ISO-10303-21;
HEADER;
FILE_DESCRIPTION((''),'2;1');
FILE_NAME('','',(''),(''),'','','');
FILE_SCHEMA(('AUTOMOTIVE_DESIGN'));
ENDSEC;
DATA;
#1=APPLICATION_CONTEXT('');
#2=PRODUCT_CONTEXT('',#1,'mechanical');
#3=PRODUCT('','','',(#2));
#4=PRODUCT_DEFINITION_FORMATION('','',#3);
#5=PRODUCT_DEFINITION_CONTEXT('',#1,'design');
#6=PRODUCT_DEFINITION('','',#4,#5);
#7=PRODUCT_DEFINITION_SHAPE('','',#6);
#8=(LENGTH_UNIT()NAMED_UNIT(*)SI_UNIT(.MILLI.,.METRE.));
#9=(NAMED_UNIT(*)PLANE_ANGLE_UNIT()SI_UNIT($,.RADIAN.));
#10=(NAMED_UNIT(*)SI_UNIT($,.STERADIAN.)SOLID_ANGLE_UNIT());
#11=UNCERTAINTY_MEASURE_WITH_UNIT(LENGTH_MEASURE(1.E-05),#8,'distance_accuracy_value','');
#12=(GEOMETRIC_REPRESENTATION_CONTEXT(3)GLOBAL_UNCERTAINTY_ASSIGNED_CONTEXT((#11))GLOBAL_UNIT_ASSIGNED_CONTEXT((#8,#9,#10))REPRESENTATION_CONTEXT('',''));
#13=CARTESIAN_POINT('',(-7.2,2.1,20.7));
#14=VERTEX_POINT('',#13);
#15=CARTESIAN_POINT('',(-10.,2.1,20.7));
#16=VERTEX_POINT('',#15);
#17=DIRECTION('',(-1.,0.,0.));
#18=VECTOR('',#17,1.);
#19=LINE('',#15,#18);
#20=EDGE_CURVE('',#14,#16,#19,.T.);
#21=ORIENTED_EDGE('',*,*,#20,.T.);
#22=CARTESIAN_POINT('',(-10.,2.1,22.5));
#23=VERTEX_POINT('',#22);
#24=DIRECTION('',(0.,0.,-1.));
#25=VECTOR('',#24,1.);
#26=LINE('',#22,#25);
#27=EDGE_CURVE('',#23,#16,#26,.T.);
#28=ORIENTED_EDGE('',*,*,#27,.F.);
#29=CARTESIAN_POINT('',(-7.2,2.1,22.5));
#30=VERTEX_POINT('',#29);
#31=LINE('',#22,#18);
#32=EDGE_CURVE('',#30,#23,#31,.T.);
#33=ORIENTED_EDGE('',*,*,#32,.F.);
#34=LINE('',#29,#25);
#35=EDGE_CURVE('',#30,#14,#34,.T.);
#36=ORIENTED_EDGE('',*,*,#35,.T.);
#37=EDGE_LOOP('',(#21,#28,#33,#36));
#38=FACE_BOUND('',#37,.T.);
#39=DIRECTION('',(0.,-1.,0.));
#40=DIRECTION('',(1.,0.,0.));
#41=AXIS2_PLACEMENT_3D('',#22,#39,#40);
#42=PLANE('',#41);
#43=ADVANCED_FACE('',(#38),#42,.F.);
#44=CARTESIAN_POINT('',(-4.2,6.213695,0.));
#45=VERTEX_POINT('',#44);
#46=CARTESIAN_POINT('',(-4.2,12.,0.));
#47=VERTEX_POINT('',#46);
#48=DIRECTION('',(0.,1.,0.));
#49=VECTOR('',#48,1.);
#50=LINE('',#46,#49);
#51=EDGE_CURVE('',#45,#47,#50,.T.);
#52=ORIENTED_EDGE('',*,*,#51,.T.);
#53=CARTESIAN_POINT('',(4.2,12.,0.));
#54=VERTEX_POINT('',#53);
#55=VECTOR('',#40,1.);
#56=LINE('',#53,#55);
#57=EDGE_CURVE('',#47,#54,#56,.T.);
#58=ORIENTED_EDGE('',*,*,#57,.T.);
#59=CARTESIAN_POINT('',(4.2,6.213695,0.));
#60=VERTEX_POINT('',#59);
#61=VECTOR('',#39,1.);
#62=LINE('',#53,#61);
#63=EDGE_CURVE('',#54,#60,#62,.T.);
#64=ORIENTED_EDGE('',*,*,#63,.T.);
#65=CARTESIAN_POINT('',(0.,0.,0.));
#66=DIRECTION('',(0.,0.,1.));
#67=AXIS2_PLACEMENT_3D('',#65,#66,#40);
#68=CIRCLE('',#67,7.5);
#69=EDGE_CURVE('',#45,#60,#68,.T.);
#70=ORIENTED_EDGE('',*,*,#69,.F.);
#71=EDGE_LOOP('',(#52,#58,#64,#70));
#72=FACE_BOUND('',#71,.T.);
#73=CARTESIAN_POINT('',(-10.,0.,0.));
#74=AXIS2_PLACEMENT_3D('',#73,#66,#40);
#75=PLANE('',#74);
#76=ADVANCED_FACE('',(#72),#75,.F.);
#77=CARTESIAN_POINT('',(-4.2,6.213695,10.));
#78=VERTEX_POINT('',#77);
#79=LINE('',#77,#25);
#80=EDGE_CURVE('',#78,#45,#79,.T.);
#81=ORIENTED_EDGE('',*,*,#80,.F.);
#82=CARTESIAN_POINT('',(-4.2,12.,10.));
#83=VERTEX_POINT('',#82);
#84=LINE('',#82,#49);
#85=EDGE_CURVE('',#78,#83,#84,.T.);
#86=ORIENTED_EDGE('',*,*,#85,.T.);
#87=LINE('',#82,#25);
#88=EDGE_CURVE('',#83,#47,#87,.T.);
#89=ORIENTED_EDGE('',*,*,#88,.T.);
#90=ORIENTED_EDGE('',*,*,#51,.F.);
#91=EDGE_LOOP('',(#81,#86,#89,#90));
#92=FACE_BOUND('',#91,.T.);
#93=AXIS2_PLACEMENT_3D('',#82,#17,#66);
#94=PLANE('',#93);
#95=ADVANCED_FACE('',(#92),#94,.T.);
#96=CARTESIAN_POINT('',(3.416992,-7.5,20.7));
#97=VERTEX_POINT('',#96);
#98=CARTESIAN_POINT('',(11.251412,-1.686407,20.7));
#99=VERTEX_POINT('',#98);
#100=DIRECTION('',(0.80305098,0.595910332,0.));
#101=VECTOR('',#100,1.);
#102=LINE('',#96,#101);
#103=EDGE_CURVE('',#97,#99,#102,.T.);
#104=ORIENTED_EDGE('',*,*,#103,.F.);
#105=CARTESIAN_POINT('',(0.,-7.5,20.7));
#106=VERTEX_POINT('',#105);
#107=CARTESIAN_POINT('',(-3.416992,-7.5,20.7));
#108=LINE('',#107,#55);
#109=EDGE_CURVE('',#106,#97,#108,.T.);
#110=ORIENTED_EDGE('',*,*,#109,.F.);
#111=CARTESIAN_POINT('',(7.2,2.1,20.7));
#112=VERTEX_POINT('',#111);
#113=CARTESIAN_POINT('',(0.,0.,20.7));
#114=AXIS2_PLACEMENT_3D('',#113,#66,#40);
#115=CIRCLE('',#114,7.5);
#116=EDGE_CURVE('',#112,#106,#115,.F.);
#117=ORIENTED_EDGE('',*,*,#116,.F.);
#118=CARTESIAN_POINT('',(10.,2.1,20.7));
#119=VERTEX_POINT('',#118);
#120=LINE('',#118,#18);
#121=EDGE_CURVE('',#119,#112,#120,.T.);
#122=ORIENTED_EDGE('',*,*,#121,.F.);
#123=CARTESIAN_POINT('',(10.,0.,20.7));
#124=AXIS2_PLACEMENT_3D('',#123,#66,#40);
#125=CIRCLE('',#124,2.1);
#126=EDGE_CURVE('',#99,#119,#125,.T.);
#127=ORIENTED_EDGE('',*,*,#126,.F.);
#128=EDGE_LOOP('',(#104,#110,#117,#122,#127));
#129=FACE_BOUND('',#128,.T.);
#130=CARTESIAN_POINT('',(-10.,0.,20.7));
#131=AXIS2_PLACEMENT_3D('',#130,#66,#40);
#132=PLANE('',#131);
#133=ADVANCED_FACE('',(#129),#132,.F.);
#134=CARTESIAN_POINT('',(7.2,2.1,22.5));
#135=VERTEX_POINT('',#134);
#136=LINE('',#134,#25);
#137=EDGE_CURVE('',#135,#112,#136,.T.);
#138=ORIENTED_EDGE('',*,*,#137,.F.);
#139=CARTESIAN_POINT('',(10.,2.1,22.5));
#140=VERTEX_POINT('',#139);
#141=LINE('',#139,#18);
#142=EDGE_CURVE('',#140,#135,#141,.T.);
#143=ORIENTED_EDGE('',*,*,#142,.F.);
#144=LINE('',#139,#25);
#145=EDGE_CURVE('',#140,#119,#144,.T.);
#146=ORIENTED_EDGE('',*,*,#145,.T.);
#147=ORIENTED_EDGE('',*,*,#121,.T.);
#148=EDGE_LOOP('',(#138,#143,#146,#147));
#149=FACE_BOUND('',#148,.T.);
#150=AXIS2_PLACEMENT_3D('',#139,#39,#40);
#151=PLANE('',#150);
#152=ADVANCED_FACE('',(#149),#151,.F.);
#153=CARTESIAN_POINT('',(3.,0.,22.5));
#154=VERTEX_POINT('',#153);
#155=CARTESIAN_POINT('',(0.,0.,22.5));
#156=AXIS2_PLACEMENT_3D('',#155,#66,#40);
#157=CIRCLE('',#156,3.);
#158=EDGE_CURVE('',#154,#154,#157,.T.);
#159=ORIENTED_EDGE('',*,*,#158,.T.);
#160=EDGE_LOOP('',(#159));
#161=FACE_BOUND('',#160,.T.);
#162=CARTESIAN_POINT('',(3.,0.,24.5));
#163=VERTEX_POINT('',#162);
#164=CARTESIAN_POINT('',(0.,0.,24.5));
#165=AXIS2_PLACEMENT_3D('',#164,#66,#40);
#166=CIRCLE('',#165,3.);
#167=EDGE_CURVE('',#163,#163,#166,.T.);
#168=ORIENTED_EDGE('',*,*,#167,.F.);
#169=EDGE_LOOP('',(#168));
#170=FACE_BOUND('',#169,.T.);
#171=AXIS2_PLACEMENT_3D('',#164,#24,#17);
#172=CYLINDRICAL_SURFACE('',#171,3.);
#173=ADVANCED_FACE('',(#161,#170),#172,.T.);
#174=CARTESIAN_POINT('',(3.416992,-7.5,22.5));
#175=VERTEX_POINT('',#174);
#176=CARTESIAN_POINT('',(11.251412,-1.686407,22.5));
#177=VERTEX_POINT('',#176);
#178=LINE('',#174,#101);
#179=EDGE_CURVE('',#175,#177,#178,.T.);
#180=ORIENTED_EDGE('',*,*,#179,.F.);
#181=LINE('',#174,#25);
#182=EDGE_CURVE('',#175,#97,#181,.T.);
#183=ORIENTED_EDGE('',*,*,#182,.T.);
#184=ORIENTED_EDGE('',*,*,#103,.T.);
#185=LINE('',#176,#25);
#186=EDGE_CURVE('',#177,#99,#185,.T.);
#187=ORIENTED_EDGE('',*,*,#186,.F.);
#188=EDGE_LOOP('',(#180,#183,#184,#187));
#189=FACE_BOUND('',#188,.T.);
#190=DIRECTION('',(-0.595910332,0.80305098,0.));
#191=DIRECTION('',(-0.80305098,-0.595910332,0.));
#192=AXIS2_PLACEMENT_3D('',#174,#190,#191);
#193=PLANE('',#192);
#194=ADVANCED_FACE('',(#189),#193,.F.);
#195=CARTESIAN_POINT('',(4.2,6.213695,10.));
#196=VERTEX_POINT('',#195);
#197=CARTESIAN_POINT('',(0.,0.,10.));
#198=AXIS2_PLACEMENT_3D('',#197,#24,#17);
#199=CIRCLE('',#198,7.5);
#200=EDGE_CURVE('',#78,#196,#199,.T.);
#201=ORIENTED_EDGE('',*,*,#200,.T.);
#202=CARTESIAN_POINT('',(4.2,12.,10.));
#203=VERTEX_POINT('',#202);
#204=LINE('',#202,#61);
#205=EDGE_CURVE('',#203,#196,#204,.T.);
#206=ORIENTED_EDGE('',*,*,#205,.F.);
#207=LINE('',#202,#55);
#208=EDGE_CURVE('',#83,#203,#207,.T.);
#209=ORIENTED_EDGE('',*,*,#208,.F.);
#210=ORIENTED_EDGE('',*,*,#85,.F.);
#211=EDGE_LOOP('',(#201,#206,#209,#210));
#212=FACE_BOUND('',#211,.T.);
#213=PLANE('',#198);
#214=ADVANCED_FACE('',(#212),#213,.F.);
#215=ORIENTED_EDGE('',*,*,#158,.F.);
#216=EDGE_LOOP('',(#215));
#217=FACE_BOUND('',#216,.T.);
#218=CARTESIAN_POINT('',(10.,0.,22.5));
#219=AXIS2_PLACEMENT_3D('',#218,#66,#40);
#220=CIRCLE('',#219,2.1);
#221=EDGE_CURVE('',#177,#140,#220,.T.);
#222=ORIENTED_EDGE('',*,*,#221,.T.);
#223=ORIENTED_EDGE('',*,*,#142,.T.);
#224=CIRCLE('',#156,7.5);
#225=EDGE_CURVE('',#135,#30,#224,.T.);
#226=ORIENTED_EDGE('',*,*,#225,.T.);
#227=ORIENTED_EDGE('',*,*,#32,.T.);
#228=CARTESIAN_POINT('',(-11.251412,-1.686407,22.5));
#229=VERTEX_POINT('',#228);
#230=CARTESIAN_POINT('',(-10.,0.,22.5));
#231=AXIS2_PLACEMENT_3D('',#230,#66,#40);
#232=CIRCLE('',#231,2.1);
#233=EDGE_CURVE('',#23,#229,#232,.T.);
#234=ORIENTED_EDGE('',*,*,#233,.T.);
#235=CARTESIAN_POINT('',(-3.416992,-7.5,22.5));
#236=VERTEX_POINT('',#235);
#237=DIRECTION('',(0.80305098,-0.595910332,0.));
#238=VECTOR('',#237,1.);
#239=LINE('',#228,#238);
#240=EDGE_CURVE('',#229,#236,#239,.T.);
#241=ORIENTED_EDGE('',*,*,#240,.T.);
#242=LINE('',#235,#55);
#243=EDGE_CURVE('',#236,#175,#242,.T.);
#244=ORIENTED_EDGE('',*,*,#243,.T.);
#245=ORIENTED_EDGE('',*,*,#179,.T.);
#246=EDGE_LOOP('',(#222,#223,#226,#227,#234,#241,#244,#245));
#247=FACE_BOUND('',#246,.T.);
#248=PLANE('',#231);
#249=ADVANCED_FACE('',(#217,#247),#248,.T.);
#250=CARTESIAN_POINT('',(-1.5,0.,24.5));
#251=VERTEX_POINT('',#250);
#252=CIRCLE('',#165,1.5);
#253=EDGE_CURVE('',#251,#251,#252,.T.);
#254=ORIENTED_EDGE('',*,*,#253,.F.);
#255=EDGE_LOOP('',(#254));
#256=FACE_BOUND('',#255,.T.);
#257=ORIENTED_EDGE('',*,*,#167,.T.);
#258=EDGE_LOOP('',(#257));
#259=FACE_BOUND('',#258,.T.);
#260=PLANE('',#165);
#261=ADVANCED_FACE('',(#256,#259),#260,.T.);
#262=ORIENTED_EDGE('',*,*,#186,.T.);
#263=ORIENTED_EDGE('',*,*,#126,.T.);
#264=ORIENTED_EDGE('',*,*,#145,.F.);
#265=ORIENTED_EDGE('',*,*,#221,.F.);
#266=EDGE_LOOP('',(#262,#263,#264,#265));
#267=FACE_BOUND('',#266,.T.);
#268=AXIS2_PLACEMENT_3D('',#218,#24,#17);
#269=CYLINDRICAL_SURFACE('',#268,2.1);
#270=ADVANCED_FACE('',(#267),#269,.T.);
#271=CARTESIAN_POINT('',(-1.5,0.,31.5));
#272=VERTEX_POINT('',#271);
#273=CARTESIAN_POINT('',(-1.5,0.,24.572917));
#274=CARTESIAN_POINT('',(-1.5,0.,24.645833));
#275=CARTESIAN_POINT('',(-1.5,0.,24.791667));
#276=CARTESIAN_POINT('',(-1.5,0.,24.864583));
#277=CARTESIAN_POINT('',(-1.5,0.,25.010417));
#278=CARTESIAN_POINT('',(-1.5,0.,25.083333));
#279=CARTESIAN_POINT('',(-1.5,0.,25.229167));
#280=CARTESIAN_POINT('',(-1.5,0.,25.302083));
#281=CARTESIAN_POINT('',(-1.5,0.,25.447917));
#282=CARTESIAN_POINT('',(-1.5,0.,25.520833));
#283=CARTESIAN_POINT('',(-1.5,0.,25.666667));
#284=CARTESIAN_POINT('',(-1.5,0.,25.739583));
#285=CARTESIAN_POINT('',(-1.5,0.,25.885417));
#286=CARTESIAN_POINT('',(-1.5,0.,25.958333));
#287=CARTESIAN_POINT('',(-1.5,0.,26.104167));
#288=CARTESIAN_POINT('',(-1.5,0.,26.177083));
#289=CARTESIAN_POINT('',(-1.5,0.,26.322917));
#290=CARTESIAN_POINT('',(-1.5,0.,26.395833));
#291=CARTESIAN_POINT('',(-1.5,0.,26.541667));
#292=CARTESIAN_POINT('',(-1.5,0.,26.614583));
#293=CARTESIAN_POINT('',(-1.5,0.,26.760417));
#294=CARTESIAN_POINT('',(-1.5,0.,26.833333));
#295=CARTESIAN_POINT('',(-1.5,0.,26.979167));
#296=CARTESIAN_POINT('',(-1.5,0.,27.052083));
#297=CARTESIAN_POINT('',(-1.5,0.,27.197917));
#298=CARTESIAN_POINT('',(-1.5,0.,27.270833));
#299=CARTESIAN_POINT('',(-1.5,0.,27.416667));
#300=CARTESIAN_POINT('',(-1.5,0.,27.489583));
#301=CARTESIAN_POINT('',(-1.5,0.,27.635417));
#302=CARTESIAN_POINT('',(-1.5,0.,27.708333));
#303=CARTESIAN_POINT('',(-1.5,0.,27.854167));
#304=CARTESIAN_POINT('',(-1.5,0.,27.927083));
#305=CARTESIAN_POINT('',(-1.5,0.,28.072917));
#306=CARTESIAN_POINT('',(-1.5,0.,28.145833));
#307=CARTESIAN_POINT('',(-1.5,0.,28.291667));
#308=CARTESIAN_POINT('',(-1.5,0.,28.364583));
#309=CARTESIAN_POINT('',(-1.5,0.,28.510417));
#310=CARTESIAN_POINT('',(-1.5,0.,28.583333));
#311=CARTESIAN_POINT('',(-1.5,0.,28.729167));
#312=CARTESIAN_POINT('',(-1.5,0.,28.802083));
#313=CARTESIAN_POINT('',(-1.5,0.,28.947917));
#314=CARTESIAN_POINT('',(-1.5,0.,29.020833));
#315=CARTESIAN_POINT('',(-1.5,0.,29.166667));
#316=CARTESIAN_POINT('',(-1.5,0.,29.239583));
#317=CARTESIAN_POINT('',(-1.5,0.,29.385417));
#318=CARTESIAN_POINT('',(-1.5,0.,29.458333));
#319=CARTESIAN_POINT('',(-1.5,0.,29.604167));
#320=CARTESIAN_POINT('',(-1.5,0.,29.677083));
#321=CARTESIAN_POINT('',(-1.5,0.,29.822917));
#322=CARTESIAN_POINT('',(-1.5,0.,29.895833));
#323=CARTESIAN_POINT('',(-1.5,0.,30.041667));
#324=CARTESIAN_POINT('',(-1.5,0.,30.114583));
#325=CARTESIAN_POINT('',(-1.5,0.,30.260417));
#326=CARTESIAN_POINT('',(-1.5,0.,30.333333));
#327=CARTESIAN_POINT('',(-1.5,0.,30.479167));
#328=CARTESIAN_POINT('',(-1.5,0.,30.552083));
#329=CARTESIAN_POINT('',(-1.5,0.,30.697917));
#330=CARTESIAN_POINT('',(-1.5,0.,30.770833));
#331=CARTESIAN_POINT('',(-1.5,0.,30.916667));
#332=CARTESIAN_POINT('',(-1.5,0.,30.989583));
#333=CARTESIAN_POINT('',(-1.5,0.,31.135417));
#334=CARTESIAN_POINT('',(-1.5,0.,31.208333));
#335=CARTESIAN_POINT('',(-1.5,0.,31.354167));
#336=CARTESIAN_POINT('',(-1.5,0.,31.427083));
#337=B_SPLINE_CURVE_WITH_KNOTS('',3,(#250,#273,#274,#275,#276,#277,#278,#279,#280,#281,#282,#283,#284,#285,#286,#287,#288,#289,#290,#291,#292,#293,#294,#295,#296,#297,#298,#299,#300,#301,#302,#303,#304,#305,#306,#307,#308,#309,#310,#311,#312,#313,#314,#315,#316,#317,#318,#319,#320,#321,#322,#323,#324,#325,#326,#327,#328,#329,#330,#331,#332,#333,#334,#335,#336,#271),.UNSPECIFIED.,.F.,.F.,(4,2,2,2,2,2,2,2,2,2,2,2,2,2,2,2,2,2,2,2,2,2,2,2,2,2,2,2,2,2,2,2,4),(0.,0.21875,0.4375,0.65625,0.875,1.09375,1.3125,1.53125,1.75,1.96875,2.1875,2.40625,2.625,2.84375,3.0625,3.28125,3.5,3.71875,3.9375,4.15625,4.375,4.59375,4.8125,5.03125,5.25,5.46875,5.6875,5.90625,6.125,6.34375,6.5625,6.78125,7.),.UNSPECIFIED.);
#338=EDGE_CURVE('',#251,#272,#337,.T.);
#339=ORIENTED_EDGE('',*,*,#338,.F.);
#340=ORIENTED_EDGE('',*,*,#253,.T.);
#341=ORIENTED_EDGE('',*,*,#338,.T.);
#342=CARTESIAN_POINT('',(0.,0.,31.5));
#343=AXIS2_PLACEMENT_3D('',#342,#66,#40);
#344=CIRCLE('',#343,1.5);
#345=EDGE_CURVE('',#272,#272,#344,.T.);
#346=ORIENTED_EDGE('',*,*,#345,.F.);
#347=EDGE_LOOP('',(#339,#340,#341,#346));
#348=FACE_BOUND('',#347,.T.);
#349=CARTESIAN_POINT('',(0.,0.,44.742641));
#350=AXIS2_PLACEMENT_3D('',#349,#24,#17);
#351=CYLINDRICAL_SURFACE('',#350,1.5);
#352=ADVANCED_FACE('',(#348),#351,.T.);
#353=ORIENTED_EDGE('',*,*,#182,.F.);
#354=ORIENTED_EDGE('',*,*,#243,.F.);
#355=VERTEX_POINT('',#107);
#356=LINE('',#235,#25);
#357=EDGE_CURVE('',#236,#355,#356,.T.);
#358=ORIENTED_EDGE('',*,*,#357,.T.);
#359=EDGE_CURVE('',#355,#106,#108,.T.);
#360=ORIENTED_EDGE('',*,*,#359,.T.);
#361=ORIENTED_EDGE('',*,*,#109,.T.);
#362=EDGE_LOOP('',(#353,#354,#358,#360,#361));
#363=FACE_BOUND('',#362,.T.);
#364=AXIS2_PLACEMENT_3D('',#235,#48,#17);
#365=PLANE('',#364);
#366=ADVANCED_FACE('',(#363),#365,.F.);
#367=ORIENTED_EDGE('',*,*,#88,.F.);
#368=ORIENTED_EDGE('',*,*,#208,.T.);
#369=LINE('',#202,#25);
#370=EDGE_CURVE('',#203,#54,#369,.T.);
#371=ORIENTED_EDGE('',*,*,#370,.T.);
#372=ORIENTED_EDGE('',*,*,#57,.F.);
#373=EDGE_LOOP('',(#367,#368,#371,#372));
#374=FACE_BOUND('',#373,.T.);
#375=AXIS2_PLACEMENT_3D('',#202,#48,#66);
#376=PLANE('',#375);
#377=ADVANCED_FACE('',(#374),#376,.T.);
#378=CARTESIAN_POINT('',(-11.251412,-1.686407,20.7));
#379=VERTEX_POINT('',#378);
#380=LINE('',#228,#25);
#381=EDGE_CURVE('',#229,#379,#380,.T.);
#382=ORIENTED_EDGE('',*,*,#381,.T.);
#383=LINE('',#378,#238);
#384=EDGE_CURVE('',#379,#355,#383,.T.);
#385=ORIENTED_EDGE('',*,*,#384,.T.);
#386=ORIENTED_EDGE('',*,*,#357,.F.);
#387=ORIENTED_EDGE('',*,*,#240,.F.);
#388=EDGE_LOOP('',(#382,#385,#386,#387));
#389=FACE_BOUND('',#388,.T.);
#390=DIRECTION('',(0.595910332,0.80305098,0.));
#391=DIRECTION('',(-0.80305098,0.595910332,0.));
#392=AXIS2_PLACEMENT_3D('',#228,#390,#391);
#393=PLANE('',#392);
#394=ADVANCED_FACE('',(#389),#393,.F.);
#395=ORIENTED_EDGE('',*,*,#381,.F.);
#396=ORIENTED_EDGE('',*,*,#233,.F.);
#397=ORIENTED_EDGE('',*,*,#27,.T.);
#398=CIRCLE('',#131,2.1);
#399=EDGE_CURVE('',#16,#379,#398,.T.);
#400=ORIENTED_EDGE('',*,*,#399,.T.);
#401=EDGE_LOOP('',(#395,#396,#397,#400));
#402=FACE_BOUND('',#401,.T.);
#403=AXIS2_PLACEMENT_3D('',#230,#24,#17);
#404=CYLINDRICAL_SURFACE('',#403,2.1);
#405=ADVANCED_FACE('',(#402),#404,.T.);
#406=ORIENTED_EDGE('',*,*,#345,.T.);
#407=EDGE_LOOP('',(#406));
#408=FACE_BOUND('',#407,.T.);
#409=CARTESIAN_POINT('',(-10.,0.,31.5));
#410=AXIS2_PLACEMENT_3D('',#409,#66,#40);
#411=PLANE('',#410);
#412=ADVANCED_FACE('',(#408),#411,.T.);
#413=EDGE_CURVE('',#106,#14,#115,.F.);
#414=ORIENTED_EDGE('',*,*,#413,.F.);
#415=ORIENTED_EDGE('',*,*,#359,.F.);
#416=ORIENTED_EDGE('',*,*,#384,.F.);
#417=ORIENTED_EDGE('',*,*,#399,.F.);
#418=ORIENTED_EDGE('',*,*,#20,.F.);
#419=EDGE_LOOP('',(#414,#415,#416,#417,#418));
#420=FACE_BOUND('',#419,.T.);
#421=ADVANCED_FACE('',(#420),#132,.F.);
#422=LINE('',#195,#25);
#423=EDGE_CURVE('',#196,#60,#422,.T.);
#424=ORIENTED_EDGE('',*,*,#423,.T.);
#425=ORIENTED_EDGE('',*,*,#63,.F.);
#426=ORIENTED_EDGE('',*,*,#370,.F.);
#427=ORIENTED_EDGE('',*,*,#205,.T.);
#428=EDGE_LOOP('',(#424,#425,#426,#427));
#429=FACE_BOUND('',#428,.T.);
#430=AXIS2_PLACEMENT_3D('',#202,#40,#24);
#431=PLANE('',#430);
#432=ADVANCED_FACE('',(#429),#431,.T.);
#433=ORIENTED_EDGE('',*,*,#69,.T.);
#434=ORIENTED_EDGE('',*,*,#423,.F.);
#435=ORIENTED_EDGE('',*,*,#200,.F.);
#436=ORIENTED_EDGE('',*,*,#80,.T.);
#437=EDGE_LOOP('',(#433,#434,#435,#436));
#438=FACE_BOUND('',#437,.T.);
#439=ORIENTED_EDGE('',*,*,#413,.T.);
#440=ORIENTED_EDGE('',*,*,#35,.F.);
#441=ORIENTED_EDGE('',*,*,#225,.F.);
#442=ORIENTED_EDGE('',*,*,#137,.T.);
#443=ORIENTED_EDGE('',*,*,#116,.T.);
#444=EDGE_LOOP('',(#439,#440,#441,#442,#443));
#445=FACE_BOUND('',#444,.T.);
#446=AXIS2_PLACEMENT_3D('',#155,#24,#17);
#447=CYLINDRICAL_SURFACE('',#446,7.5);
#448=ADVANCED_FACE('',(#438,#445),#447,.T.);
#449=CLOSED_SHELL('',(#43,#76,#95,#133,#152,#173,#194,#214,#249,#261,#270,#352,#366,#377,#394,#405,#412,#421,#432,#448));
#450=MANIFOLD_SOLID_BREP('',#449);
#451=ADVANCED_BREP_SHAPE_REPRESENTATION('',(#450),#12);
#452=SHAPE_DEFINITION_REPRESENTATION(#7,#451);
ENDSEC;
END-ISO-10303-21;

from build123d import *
from build123d.topology import SkipClean

# Parameters (mm, degrees)
BOSS_EXTRUDE1_DEPTH = 22.5
SKETCH2_R           = 3
BOSS_EXTRUDE2_DEPTH = 2
SKETCH3_OUTSIDE_W   = 33.712
SKETCH3_OUTSIDE_H   = 24.512
SKETCH3_OUTSIDE_R   = 7.5
CUT_EXTRUDE1_DEPTH  = 20.7
SKETCH4_R           = 1.5
BOSS_EXTRUDE3_DEPTH = 7
SKETCH5_W           = 8.4
SKETCH5_H           = 5.786305447
BOSS_EXTRUDE4_DEPTH = 10


with BuildPart() as part:
    # Sketch1 → Boss-Extrude1 (new body)
    with BuildSketch(Plane.XY):
        with BuildLine():
            Line((-11.251411697, -1.686407058), (-3.416992222, -7.5))
            Line((-3.416992222, -7.5), (3.416992222, -7.5))
            Line((3.416992222, -7.5), (11.251411697, -1.686407058))
            ThreePointArc((11.251411697, -1.686407058), (11.993922619, 0.658993619), (10, 2.1))
            Line((10, 2.1), (7.2, 2.1))
            ThreePointArc((7.2, 2.1), (0, 7.5), (-7.2, 2.1))
            Line((-7.2, 2.1), (-10, 2.1))
            ThreePointArc((-10, 2.1), (-11.993922619, 0.658993619), (-11.251411697, -1.686407058))
        make_face()
    extrude(amount=BOSS_EXTRUDE1_DEPTH)

    # Sketch2 → Boss-Extrude2 (add)
    with BuildSketch(Plane.XY.offset(22.5)):
        Circle(SKETCH2_R)
    extrude(amount=BOSS_EXTRUDE2_DEPTH)

    # Sketch3 outside → Cut-Extrude1 (cut)
    with SkipClean():  # the faces are left unmerged after this step: merging them gives an invalid solid
        with BuildSketch(Plane(origin=(0, 0, 0), x_dir=(-1, 0, 0), z_dir=(0, 0, -1))):
            Rectangle(SKETCH3_OUTSIDE_W, SKETCH3_OUTSIDE_H)
            with Locations(Location((0, 0, 0), (0, 0, 16.260204708))):
                Circle(SKETCH3_OUTSIDE_R, mode=Mode.SUBTRACT)
        extrude(amount=-CUT_EXTRUDE1_DEPTH, mode=Mode.SUBTRACT)
    add(part.part.scale(1), mode=Mode.REPLACE)  # the faces are merged on a copy

    # Sketch4 → Boss-Extrude3 (add)
    with BuildSketch(Plane.XY.offset(24.5)):
        with Locations(Location((0, 0, 0), (0, 0, 180))):
            Circle(SKETCH4_R)
    extrude(amount=BOSS_EXTRUDE3_DEPTH)

    # Sketch5 → Boss-Extrude4 (add)
    with BuildSketch(Plane(origin=(0, 0, 0), x_dir=(-1, 0, 0), z_dir=(0, 0, -1))):
        with Locations((0, 9.106847276)):
            Rectangle(SKETCH5_W, SKETCH5_H)
    extrude(amount=-BOSS_EXTRUDE4_DEPTH)


solid = part.part
